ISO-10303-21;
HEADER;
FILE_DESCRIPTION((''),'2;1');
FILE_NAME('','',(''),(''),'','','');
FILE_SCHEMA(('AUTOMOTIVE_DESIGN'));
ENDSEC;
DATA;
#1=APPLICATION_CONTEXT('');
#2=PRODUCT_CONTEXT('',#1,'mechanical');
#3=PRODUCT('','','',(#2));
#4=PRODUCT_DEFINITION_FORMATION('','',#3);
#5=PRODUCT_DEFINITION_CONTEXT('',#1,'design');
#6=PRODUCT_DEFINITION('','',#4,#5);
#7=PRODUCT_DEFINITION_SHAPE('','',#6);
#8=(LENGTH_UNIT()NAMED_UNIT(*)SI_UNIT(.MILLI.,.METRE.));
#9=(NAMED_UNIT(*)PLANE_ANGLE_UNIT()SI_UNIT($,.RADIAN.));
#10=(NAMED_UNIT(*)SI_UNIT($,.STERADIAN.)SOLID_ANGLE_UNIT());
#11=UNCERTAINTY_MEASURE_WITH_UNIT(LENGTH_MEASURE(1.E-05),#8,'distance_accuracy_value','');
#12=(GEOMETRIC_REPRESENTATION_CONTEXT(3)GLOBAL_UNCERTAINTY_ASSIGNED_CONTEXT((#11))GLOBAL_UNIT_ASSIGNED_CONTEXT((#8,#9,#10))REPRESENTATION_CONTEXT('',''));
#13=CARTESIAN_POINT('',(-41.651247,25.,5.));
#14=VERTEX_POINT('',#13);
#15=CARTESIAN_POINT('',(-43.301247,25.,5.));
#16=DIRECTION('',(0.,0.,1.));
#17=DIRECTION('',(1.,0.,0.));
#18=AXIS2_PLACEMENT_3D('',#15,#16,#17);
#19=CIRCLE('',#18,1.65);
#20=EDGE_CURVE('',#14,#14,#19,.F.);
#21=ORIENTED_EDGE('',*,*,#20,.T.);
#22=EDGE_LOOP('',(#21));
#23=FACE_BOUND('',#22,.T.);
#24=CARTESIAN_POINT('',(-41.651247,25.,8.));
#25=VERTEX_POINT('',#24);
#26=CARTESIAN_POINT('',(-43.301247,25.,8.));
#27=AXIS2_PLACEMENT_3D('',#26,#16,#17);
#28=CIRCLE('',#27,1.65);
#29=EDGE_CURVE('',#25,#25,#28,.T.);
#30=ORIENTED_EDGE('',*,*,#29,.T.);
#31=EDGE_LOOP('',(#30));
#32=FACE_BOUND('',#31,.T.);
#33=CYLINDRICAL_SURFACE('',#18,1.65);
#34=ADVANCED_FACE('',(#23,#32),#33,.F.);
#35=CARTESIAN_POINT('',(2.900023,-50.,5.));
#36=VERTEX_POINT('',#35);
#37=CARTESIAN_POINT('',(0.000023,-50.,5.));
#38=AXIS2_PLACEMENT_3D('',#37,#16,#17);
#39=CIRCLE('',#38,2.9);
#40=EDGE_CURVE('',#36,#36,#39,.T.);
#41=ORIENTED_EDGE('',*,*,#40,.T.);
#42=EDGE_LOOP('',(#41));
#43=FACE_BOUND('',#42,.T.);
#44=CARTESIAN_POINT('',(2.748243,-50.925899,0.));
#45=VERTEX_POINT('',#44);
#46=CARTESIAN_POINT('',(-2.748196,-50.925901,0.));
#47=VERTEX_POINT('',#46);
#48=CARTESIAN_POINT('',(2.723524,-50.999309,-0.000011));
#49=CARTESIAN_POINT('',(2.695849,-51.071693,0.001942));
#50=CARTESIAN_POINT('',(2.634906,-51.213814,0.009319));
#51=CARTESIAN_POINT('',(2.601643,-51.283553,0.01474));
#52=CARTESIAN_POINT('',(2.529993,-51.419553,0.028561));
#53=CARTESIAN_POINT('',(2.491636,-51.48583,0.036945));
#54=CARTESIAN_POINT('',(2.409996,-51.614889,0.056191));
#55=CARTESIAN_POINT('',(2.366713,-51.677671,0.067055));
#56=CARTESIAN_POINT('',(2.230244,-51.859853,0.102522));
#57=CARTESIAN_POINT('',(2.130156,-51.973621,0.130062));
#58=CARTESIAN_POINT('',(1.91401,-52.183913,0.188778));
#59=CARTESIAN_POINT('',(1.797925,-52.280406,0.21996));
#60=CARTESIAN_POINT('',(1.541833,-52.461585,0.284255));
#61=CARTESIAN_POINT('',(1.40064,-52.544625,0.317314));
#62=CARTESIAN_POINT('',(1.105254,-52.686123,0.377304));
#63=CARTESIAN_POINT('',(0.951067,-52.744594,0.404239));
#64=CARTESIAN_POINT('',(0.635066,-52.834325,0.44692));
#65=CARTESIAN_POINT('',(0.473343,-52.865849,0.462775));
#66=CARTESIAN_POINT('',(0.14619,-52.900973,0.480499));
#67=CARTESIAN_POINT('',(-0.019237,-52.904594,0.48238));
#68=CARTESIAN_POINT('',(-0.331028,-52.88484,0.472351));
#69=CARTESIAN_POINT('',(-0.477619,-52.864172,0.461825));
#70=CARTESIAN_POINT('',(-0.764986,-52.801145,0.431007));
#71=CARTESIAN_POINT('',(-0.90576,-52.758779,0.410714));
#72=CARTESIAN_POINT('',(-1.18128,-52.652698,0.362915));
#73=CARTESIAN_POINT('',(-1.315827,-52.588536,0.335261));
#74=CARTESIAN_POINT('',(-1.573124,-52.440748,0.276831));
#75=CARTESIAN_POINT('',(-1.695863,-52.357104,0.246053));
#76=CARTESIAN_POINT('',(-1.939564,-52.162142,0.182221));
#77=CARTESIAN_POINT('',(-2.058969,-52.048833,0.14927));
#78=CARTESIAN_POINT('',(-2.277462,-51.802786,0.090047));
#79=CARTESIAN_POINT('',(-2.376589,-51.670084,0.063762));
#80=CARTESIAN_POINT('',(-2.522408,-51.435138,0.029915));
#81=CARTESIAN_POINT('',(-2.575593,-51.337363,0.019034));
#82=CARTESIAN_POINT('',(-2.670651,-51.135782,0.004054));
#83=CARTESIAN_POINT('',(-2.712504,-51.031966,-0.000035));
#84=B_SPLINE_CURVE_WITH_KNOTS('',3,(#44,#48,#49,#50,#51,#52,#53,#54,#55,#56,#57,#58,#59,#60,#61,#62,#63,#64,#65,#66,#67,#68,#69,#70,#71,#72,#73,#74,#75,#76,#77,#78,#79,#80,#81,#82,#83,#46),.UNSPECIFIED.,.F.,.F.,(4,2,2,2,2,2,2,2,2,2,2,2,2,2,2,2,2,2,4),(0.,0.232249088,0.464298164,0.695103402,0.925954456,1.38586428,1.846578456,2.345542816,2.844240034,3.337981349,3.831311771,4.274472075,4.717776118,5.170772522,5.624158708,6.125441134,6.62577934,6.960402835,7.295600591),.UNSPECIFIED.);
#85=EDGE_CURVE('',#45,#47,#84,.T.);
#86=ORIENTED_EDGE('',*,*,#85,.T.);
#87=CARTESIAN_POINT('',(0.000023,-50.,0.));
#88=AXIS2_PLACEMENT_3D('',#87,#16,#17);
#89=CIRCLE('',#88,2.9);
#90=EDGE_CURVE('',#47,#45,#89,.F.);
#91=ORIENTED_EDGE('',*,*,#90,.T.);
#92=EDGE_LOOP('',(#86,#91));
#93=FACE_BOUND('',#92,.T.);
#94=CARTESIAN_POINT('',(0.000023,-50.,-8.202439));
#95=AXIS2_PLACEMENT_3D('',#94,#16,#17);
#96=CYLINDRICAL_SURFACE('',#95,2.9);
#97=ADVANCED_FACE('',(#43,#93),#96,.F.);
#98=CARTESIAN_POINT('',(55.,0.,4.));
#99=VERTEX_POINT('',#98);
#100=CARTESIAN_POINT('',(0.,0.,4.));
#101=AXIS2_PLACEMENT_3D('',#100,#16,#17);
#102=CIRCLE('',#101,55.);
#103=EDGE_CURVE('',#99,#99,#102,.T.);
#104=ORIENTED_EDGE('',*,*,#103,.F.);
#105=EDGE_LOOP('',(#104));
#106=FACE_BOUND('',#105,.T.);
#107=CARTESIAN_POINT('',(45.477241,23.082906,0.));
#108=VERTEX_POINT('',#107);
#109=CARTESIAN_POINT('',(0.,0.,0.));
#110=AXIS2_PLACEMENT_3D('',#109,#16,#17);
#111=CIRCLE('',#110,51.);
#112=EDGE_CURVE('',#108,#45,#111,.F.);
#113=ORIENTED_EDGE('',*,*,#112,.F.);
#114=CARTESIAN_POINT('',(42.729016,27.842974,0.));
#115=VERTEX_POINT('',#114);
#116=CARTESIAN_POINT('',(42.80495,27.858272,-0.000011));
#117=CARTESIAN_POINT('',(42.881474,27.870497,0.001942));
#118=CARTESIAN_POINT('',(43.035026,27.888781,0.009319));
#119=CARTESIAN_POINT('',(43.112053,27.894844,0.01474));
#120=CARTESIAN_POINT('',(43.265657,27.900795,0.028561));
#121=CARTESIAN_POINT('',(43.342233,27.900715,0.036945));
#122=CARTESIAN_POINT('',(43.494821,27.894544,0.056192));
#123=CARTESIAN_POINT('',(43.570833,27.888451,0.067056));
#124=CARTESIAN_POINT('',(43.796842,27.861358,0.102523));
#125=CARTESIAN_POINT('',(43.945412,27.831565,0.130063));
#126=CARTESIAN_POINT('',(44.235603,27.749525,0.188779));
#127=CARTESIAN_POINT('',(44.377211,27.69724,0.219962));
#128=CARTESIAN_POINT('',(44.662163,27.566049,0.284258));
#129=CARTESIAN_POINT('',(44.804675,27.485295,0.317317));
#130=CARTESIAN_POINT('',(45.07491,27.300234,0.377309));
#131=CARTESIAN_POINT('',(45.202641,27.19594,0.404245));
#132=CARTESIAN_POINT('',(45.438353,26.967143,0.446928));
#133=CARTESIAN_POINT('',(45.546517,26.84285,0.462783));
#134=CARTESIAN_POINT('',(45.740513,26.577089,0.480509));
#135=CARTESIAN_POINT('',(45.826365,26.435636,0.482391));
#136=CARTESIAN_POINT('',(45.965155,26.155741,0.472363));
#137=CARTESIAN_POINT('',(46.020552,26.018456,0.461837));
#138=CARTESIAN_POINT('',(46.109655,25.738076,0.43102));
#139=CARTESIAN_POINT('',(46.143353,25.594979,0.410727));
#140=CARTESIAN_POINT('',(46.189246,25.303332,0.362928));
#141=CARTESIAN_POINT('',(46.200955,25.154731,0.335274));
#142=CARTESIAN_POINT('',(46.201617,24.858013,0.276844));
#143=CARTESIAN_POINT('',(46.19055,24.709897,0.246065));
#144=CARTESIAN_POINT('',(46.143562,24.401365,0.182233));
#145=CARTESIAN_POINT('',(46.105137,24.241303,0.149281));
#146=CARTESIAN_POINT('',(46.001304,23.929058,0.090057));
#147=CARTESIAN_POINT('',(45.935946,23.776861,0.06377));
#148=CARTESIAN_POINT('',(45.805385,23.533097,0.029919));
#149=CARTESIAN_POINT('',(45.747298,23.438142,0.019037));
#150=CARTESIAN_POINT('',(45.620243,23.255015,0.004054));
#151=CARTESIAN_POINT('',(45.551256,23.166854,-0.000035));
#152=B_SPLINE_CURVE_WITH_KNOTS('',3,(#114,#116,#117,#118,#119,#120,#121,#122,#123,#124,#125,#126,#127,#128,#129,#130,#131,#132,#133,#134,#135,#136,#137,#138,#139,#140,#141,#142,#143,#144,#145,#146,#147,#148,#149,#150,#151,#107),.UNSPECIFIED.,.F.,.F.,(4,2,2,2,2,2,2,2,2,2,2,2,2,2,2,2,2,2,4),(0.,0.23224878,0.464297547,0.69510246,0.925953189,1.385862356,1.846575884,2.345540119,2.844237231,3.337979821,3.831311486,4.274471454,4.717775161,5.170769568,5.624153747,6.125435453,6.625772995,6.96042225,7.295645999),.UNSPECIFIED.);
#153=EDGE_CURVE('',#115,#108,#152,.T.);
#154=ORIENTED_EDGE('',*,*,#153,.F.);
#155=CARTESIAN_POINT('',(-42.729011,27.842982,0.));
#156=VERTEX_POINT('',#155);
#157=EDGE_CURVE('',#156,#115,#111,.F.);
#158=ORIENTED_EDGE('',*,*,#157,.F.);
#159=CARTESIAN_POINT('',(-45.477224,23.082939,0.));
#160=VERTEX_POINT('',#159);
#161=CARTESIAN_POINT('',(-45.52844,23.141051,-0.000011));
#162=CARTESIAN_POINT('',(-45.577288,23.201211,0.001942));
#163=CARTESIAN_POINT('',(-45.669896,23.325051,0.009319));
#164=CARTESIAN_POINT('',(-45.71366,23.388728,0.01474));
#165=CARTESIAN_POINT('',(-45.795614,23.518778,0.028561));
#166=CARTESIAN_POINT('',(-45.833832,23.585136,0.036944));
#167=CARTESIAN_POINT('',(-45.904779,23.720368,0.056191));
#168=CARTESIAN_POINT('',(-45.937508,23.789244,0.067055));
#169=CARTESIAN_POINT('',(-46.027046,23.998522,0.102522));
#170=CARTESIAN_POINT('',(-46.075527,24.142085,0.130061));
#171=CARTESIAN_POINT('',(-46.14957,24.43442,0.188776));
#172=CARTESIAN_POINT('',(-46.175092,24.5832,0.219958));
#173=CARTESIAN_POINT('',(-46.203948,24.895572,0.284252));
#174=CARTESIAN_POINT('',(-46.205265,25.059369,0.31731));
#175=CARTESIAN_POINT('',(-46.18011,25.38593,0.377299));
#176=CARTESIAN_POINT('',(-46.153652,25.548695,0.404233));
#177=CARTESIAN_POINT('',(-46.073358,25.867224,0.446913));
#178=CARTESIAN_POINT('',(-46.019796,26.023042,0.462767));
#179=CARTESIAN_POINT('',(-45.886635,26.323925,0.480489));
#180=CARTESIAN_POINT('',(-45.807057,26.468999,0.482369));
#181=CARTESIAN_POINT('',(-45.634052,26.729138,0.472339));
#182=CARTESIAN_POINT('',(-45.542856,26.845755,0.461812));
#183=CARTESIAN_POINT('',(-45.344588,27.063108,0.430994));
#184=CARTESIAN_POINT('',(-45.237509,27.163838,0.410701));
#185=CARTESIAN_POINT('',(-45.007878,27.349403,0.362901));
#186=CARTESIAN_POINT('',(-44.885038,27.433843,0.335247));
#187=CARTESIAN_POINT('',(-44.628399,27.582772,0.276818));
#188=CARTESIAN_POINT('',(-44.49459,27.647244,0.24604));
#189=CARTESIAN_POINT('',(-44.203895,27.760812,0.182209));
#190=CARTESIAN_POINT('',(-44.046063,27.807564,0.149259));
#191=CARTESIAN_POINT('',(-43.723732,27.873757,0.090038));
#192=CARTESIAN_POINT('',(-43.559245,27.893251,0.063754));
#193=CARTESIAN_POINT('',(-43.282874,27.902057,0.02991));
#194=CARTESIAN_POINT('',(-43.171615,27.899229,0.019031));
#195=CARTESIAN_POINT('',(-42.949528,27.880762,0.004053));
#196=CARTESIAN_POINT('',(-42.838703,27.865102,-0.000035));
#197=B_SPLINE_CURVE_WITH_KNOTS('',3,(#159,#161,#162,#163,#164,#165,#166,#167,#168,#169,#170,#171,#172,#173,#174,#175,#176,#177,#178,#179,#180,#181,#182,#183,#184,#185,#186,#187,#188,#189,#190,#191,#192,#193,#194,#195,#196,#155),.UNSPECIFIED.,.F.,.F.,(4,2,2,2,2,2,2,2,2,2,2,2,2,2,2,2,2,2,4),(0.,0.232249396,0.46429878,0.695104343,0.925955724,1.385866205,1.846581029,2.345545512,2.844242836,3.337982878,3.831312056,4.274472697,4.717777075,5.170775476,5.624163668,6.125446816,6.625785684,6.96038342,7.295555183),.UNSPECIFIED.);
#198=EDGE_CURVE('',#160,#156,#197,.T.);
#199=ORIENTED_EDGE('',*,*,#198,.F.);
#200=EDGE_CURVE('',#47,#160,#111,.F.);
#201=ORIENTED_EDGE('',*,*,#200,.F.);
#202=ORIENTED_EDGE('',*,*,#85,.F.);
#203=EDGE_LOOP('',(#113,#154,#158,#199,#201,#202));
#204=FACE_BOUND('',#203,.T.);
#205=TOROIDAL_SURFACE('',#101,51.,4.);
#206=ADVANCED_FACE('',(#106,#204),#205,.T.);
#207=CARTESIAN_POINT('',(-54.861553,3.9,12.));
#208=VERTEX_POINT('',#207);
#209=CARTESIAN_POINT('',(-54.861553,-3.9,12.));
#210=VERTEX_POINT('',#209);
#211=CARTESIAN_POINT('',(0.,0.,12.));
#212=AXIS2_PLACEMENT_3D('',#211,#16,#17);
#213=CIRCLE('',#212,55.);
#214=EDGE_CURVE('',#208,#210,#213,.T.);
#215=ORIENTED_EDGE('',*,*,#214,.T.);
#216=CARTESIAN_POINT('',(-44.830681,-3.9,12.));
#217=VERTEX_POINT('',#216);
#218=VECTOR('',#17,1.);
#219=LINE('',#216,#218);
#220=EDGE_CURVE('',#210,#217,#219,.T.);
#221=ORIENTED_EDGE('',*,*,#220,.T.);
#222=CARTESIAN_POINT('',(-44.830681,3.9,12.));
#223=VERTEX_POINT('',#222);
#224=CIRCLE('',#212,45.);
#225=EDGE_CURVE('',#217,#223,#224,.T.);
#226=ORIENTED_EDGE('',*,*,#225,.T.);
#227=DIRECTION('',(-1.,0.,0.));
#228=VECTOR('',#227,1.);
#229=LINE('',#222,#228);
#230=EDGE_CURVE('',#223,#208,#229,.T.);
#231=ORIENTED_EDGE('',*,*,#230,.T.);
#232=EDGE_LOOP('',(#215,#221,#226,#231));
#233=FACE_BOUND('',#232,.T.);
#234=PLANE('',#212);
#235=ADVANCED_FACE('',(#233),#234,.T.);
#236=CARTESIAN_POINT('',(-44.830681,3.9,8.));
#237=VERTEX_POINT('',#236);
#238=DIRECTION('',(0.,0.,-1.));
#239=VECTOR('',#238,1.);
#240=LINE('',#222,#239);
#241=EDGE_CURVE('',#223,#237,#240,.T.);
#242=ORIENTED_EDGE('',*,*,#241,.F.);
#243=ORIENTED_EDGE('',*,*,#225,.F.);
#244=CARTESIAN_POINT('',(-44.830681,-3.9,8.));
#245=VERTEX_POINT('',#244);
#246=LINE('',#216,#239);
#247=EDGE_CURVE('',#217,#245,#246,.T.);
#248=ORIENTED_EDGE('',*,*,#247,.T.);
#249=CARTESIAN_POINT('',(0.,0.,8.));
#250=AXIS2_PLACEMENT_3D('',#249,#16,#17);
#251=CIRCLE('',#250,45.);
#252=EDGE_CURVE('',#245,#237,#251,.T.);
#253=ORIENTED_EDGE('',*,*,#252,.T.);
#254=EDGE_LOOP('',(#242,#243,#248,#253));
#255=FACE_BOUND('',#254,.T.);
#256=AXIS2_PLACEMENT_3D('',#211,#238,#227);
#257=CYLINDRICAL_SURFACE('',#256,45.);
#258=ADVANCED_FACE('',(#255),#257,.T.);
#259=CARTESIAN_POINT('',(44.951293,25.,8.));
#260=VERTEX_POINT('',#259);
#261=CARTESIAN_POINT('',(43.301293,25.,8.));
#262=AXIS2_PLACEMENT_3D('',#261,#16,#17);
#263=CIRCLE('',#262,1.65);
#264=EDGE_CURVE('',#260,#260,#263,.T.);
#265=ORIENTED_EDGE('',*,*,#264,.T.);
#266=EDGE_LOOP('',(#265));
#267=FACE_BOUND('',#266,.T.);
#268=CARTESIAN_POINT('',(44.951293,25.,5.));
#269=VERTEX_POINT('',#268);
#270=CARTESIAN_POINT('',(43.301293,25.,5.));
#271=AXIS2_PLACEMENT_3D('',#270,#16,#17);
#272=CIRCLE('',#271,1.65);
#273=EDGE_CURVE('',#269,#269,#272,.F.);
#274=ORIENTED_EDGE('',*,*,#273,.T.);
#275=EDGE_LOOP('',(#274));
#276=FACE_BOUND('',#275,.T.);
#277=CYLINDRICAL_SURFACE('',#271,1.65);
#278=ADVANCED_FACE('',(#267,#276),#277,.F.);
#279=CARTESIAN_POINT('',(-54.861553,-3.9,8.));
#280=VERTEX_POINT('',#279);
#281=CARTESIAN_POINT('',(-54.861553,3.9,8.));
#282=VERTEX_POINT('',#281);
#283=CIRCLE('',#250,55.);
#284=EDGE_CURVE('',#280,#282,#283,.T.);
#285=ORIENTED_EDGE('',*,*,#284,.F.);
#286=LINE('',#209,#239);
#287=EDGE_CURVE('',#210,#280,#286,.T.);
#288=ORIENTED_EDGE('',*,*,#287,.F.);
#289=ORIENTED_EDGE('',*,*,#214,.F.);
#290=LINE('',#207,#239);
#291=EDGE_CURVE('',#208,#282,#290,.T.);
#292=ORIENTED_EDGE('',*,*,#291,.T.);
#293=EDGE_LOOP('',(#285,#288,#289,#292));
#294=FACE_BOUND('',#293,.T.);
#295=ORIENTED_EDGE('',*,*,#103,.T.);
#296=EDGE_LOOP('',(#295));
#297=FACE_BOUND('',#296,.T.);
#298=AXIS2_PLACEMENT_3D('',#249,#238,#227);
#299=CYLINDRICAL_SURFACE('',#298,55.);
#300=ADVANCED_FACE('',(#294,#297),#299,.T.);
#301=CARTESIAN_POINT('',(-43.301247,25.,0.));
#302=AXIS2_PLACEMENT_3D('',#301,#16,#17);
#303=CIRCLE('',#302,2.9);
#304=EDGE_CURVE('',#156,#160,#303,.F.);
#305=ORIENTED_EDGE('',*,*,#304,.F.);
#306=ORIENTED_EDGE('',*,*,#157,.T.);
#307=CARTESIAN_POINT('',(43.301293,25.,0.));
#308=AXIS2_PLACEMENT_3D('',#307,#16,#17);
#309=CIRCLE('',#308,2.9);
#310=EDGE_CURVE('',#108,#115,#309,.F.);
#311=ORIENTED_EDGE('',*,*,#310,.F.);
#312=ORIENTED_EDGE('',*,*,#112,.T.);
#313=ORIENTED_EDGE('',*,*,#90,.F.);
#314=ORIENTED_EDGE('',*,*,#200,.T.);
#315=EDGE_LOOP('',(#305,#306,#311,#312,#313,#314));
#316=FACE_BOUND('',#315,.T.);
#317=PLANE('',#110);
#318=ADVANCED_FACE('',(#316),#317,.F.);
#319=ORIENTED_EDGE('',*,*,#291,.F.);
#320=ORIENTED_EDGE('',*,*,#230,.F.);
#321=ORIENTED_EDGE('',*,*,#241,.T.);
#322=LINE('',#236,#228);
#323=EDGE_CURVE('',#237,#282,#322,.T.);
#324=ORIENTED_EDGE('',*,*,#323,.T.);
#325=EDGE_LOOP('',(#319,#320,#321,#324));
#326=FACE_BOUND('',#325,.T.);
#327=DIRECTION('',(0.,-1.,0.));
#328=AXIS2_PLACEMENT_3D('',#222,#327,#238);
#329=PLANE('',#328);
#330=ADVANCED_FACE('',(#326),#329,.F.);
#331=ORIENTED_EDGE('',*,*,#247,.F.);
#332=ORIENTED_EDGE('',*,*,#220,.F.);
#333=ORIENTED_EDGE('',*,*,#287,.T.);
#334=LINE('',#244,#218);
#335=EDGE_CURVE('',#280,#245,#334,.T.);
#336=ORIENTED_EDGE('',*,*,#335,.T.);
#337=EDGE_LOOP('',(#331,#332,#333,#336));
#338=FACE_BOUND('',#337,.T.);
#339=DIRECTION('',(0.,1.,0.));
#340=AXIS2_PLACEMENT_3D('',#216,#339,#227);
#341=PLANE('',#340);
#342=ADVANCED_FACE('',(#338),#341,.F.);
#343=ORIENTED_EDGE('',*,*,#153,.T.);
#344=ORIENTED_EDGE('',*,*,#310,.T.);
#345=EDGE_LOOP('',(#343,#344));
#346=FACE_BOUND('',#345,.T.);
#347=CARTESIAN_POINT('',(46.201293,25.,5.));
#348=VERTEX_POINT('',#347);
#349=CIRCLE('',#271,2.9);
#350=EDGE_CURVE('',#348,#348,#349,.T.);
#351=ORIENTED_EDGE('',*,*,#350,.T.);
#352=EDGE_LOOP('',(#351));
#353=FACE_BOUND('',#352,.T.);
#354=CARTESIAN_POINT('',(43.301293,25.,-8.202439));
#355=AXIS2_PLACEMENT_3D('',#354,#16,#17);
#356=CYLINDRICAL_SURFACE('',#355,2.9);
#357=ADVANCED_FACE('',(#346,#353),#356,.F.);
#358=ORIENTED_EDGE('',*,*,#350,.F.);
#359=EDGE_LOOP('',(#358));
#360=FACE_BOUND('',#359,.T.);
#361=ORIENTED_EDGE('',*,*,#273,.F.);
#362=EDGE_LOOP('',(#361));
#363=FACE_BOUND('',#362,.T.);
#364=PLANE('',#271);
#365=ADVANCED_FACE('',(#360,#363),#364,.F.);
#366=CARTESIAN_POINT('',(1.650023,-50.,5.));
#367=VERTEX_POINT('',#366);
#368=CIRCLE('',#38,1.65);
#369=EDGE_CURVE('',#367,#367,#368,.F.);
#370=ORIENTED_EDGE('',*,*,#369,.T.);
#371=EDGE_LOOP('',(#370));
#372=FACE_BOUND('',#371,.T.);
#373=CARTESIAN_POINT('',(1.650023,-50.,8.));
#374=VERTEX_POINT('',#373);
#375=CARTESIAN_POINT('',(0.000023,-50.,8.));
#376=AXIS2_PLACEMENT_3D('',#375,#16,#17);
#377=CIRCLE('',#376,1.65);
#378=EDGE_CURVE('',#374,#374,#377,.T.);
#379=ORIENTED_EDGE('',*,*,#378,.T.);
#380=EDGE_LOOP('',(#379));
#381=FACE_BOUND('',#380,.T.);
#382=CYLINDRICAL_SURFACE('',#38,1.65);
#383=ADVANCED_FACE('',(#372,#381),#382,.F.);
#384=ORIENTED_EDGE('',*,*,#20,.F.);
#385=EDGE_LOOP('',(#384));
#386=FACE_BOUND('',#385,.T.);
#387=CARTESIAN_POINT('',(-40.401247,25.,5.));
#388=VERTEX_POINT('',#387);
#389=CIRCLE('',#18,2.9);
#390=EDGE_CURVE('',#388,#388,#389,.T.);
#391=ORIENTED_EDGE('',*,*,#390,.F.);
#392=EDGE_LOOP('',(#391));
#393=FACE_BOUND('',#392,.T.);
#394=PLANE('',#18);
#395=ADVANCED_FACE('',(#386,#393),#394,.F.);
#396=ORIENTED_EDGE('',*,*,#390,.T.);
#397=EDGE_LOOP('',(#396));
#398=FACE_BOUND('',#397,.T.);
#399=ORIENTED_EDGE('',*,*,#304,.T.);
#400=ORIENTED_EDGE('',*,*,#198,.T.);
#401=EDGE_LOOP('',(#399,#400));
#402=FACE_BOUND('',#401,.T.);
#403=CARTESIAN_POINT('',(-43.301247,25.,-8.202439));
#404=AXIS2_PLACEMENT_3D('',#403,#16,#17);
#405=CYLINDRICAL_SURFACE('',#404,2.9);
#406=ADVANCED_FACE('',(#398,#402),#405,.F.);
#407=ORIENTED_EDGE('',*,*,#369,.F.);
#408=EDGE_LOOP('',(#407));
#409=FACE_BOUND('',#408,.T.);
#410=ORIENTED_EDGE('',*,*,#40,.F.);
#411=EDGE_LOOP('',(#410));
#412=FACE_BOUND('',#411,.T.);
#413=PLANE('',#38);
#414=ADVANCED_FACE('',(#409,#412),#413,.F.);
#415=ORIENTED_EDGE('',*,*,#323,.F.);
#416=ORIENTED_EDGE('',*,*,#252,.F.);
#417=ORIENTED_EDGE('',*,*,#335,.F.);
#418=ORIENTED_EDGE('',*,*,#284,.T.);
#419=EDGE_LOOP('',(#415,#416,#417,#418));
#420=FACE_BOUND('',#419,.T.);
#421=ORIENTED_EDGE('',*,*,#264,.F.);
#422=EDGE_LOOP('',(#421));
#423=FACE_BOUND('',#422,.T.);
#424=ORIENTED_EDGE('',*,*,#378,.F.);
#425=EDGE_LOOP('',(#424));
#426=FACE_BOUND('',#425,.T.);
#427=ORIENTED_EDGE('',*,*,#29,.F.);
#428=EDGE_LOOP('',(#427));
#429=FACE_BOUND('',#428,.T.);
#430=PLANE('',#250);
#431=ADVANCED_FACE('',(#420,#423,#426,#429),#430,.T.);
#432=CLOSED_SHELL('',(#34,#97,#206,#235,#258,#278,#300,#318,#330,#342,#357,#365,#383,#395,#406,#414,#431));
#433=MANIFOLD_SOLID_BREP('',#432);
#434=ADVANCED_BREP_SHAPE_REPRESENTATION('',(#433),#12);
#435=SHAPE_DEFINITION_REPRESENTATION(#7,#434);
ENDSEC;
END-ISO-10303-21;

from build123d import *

# Parameters (mm, degrees)
ESBO_O1_R                = 55
RESSALTO_EXTRUS_O1_DEPTH = 8
RESSALTO_EXTRUS_O2_DEPTH = 4
ESBO_O3_R                = 1.65
CORTE_EXTRUS_O1_DEPTH    = 3
ESBO_O4_R                = 2.9
CORTE_EXTRUS_O2_DEPTH    = 5
FILETE1_R                = 4


with BuildPart() as part:
    # Esboço1 → Ressalto-extrusão1 (new body)
    with BuildSketch(Plane.XY):
        Circle(ESBO_O1_R)
    extrude(amount=RESSALTO_EXTRUS_O1_DEPTH)

    # Esboço2 → Ressalto-extrusão2 (add)
    with BuildSketch(Plane.XY.offset(8)):
        with BuildLine():
            Line((-44.830681458, 3.9), (-54.861553022, 3.9))
            ThreePointArc((-54.861553022, 3.9), (-55, 0), (-54.861553022, -3.9))
            Line((-54.861553022, -3.9), (-44.830681458, -3.9))
            ThreePointArc((-44.830681458, -3.9), (45, 0), (-44.830681458, 3.9))
        make_face()
    extrude(amount=RESSALTO_EXTRUS_O2_DEPTH)

    # Esboço3 → Corte-extrusão1 (cut)
    with BuildSketch(Plane.XY.offset(8)):
        with Locations((2.2845e-05, -50)):
            Circle(ESBO_O3_R)
        with Locations((-43.301247344, 25)):
            Circle(ESBO_O3_R)
        with Locations((43.301293034, 25)):
            Circle(ESBO_O3_R)
    extrude(amount=-CORTE_EXTRUS_O1_DEPTH, mode=Mode.SUBTRACT)

    # Esboço4 → Corte-extrusão2 (cut)
    with BuildSketch(Plane.XY.offset(5)):
        with Locations((-43.301247344, 25)):
            Circle(ESBO_O4_R)
        with Locations((43.301293034, 25)):
            Circle(ESBO_O4_R)
        with Locations((2.2845e-05, -50)):
            Circle(ESBO_O4_R)
    extrude(amount=-CORTE_EXTRUS_O2_DEPTH, mode=Mode.SUBTRACT)

    # Filete1
    # the kernel refuses this fillet: 4 mm, written as the material it takes off along each edge
    with BuildSketch(Plane(origin=(0, 0, 0), x_dir=(1, 0, 0), z_dir=(0, -1, 0))) as filete1_piece_1:
        with BuildLine():
            CenterArc((55 - FILETE1_R, FILETE1_R), FILETE1_R, 270, 90)
            Line((55 - FILETE1_R, 0), (55, 0))
            Line((55, 0), (55, FILETE1_R))
        make_face()
    revolve(axis=Axis((0, 0, 0), (0, 0, 1)), mode=Mode.SUBTRACT)


solid = part.part
